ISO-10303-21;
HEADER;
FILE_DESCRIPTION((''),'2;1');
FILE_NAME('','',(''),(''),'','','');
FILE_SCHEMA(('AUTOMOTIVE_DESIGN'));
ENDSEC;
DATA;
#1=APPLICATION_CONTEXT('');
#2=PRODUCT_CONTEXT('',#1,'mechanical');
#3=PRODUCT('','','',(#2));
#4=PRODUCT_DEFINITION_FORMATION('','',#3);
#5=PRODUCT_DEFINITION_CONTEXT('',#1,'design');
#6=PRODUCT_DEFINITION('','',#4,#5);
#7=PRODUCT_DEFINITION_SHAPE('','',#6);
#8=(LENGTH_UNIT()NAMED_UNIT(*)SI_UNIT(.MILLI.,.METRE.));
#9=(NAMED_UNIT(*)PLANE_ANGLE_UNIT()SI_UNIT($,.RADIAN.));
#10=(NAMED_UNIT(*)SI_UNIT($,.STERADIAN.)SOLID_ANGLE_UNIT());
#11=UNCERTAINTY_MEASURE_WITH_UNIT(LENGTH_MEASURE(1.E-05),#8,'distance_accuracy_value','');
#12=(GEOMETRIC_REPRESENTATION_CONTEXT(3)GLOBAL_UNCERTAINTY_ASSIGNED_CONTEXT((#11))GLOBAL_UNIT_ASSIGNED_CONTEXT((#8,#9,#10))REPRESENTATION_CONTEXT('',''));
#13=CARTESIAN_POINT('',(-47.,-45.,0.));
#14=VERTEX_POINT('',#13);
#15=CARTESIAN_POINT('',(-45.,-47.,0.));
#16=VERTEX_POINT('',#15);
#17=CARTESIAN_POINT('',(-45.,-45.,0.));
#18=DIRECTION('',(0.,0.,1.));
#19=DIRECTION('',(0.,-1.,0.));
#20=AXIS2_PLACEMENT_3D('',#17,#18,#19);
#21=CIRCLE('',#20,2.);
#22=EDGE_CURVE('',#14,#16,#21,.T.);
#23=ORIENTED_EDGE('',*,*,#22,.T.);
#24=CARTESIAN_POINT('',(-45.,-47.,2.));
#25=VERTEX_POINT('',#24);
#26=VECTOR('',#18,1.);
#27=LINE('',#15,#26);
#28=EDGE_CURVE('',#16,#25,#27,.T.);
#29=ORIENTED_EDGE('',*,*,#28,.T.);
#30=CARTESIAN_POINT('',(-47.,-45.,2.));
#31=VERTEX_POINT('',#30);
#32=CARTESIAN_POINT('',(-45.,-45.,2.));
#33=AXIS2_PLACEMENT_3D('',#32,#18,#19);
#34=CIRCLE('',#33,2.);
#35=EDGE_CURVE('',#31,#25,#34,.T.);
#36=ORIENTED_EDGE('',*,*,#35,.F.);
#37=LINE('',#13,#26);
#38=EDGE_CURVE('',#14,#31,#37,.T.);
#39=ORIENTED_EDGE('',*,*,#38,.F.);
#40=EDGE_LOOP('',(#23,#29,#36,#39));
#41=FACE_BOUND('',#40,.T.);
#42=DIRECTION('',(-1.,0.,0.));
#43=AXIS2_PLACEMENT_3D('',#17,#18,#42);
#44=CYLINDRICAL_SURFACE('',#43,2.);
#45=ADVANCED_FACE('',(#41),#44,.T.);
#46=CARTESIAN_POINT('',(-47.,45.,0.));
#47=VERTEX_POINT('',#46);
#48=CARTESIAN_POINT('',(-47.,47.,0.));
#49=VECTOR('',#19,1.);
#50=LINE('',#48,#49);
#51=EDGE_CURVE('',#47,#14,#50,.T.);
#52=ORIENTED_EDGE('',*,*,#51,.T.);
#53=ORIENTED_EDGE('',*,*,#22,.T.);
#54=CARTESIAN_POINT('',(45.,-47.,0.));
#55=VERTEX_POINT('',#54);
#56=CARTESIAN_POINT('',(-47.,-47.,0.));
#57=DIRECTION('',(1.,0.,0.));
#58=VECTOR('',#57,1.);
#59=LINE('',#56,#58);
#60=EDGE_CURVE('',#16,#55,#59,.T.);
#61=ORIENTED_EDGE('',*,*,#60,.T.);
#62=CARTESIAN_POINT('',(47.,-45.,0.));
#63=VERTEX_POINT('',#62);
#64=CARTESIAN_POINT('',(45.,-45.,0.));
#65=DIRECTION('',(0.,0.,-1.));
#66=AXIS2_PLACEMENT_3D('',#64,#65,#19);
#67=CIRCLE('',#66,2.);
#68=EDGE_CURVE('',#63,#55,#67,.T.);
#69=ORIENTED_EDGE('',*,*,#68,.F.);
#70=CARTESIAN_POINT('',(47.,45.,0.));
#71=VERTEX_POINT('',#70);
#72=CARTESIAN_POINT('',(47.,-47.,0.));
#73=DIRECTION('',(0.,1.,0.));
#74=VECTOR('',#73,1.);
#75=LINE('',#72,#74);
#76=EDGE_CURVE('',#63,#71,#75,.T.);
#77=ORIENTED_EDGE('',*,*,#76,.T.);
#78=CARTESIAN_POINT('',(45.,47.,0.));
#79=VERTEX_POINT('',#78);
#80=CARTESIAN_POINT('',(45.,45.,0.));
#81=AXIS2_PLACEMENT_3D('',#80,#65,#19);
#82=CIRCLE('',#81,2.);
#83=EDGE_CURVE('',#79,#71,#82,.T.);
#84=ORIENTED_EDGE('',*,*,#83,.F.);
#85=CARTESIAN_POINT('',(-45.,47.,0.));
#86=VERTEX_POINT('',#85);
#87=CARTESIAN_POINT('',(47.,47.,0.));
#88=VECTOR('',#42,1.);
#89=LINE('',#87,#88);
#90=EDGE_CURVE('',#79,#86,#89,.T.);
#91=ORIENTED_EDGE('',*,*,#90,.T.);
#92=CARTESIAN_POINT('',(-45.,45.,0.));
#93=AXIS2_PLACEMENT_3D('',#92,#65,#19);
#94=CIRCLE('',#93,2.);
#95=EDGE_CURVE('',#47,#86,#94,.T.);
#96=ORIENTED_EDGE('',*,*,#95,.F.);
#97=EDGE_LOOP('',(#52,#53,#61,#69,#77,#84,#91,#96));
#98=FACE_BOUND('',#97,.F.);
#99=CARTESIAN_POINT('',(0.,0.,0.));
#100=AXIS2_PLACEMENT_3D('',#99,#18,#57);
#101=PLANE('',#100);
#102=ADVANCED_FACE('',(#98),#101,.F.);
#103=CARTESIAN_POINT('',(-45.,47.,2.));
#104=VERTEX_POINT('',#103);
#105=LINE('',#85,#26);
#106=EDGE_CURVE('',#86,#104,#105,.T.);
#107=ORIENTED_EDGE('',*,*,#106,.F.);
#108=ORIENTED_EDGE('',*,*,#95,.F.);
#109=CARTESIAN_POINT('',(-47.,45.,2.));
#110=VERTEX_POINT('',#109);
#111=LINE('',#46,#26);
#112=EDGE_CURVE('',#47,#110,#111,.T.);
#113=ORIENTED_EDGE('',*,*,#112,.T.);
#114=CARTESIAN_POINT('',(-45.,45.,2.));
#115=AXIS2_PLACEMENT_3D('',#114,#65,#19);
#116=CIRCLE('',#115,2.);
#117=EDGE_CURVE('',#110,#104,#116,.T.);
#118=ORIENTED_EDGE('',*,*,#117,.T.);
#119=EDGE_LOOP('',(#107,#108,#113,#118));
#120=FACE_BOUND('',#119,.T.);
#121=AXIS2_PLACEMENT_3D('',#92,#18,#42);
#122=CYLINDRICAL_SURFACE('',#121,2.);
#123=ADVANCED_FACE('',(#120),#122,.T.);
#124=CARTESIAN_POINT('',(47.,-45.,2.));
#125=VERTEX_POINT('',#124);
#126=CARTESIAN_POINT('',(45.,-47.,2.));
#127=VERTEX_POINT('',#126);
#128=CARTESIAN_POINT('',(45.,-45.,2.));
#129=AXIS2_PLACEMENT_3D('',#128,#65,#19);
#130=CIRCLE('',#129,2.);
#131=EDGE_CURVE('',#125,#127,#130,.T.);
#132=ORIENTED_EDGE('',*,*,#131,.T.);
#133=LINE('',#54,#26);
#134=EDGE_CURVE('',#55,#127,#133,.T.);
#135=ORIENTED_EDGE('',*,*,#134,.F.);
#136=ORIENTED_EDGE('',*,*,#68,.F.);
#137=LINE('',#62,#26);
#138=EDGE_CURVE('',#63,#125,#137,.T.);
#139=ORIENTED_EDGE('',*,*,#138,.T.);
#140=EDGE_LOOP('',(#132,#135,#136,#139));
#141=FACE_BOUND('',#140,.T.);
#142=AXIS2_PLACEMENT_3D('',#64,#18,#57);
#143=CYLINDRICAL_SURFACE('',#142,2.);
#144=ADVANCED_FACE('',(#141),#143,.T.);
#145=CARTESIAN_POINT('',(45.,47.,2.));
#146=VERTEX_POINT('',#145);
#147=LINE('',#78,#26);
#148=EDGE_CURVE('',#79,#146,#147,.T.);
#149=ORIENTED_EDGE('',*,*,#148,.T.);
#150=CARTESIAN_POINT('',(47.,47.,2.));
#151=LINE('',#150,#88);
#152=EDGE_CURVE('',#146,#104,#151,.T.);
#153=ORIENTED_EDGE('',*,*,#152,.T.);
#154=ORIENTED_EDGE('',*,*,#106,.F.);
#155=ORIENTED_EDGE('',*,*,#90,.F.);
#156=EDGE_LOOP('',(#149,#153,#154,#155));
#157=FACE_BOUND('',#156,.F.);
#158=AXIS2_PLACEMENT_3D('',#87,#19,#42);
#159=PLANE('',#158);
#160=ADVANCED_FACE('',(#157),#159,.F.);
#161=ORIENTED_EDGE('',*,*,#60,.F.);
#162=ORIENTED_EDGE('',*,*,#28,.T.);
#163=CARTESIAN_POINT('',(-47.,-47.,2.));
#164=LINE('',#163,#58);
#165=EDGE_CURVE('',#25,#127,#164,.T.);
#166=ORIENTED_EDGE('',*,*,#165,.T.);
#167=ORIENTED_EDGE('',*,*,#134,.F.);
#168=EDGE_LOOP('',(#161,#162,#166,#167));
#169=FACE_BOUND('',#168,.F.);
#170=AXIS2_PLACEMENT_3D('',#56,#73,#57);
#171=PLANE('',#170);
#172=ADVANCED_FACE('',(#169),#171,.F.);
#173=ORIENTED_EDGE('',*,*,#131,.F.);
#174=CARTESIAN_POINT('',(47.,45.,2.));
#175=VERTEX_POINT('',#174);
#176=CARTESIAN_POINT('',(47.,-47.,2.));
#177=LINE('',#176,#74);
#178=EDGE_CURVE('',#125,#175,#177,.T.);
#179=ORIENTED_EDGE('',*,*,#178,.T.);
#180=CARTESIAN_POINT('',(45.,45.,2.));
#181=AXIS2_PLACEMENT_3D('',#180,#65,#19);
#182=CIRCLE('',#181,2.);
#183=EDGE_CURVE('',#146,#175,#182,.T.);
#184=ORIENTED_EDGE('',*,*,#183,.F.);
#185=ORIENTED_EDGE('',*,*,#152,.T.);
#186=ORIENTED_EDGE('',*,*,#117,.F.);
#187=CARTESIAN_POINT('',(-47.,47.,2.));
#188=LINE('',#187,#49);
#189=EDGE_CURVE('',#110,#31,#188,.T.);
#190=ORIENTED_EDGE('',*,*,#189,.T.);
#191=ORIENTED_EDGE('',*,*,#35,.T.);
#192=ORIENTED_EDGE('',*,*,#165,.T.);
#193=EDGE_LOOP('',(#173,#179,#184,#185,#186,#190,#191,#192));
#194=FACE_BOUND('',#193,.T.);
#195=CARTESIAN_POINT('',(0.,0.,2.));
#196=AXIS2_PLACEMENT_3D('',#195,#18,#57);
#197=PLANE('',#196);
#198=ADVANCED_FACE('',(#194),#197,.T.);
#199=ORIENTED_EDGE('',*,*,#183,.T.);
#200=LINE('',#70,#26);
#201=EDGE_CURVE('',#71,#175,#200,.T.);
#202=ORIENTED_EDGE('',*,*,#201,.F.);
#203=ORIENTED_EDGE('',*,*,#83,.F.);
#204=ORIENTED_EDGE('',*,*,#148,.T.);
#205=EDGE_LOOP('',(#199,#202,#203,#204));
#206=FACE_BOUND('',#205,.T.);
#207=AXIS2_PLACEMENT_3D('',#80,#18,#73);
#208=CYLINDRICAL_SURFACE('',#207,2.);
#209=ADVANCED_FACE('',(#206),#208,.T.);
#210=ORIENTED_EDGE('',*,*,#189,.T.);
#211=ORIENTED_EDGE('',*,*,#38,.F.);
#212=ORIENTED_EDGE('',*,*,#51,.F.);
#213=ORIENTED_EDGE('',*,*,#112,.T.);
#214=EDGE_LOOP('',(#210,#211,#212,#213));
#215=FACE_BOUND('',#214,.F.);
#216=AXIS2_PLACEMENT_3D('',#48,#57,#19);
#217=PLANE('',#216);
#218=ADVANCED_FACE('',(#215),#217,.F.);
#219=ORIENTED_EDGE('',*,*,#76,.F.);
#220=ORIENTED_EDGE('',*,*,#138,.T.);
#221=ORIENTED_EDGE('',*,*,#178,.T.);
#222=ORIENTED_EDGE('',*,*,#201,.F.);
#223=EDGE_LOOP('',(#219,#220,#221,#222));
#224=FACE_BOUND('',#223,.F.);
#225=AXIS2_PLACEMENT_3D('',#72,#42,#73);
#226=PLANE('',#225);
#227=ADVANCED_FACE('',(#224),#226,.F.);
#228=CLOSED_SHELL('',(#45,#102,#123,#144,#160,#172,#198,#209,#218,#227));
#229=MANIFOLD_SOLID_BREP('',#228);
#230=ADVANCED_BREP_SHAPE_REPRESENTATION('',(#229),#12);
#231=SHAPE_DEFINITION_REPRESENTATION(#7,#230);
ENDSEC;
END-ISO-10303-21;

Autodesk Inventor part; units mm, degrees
ref_plane "YZ Plane" through (0, 0, 0) normal (1, 0, 0) x (0, 1, 0)
ref_plane "XZ Plane" through (0, 0, 0) normal (0, 1, 0) x (-1, 0, 0)
ref_plane "XY Plane" through (0, 0, 0) normal (0, 0, 1) x (1, 0, 0)
sketch "Sketch1" plane through (0, 0, 0) normal (0, 0, 1) x (1, 0, 0)
  line L0 (-47, -47) -> (47, -47)
  line L1 (47, -47) -> (47, 47)
  line L2 (47, 47) -> (-47, 47)
  line L3 (-47, 47) -> (-47, -47)
  line L4 (-47, -47) -> (47, 47) construction
  line L5 (47, -47) -> (-47, 47) construction
  point P0 (0, 0)
  dimension "d154" = 94
  dimension "d155" = 94
extrude "Plate5" add sketch "Sketch1" along normal blind 2
fillet "Corner Round1" radius 2 4 edges at (47, 47, 1) (-47, 47, 1) (-47, -47, 1) (47, -47, 1)
properties part number "TZS 765 FDS 940 CUP 1" material "Stainless Steel"
